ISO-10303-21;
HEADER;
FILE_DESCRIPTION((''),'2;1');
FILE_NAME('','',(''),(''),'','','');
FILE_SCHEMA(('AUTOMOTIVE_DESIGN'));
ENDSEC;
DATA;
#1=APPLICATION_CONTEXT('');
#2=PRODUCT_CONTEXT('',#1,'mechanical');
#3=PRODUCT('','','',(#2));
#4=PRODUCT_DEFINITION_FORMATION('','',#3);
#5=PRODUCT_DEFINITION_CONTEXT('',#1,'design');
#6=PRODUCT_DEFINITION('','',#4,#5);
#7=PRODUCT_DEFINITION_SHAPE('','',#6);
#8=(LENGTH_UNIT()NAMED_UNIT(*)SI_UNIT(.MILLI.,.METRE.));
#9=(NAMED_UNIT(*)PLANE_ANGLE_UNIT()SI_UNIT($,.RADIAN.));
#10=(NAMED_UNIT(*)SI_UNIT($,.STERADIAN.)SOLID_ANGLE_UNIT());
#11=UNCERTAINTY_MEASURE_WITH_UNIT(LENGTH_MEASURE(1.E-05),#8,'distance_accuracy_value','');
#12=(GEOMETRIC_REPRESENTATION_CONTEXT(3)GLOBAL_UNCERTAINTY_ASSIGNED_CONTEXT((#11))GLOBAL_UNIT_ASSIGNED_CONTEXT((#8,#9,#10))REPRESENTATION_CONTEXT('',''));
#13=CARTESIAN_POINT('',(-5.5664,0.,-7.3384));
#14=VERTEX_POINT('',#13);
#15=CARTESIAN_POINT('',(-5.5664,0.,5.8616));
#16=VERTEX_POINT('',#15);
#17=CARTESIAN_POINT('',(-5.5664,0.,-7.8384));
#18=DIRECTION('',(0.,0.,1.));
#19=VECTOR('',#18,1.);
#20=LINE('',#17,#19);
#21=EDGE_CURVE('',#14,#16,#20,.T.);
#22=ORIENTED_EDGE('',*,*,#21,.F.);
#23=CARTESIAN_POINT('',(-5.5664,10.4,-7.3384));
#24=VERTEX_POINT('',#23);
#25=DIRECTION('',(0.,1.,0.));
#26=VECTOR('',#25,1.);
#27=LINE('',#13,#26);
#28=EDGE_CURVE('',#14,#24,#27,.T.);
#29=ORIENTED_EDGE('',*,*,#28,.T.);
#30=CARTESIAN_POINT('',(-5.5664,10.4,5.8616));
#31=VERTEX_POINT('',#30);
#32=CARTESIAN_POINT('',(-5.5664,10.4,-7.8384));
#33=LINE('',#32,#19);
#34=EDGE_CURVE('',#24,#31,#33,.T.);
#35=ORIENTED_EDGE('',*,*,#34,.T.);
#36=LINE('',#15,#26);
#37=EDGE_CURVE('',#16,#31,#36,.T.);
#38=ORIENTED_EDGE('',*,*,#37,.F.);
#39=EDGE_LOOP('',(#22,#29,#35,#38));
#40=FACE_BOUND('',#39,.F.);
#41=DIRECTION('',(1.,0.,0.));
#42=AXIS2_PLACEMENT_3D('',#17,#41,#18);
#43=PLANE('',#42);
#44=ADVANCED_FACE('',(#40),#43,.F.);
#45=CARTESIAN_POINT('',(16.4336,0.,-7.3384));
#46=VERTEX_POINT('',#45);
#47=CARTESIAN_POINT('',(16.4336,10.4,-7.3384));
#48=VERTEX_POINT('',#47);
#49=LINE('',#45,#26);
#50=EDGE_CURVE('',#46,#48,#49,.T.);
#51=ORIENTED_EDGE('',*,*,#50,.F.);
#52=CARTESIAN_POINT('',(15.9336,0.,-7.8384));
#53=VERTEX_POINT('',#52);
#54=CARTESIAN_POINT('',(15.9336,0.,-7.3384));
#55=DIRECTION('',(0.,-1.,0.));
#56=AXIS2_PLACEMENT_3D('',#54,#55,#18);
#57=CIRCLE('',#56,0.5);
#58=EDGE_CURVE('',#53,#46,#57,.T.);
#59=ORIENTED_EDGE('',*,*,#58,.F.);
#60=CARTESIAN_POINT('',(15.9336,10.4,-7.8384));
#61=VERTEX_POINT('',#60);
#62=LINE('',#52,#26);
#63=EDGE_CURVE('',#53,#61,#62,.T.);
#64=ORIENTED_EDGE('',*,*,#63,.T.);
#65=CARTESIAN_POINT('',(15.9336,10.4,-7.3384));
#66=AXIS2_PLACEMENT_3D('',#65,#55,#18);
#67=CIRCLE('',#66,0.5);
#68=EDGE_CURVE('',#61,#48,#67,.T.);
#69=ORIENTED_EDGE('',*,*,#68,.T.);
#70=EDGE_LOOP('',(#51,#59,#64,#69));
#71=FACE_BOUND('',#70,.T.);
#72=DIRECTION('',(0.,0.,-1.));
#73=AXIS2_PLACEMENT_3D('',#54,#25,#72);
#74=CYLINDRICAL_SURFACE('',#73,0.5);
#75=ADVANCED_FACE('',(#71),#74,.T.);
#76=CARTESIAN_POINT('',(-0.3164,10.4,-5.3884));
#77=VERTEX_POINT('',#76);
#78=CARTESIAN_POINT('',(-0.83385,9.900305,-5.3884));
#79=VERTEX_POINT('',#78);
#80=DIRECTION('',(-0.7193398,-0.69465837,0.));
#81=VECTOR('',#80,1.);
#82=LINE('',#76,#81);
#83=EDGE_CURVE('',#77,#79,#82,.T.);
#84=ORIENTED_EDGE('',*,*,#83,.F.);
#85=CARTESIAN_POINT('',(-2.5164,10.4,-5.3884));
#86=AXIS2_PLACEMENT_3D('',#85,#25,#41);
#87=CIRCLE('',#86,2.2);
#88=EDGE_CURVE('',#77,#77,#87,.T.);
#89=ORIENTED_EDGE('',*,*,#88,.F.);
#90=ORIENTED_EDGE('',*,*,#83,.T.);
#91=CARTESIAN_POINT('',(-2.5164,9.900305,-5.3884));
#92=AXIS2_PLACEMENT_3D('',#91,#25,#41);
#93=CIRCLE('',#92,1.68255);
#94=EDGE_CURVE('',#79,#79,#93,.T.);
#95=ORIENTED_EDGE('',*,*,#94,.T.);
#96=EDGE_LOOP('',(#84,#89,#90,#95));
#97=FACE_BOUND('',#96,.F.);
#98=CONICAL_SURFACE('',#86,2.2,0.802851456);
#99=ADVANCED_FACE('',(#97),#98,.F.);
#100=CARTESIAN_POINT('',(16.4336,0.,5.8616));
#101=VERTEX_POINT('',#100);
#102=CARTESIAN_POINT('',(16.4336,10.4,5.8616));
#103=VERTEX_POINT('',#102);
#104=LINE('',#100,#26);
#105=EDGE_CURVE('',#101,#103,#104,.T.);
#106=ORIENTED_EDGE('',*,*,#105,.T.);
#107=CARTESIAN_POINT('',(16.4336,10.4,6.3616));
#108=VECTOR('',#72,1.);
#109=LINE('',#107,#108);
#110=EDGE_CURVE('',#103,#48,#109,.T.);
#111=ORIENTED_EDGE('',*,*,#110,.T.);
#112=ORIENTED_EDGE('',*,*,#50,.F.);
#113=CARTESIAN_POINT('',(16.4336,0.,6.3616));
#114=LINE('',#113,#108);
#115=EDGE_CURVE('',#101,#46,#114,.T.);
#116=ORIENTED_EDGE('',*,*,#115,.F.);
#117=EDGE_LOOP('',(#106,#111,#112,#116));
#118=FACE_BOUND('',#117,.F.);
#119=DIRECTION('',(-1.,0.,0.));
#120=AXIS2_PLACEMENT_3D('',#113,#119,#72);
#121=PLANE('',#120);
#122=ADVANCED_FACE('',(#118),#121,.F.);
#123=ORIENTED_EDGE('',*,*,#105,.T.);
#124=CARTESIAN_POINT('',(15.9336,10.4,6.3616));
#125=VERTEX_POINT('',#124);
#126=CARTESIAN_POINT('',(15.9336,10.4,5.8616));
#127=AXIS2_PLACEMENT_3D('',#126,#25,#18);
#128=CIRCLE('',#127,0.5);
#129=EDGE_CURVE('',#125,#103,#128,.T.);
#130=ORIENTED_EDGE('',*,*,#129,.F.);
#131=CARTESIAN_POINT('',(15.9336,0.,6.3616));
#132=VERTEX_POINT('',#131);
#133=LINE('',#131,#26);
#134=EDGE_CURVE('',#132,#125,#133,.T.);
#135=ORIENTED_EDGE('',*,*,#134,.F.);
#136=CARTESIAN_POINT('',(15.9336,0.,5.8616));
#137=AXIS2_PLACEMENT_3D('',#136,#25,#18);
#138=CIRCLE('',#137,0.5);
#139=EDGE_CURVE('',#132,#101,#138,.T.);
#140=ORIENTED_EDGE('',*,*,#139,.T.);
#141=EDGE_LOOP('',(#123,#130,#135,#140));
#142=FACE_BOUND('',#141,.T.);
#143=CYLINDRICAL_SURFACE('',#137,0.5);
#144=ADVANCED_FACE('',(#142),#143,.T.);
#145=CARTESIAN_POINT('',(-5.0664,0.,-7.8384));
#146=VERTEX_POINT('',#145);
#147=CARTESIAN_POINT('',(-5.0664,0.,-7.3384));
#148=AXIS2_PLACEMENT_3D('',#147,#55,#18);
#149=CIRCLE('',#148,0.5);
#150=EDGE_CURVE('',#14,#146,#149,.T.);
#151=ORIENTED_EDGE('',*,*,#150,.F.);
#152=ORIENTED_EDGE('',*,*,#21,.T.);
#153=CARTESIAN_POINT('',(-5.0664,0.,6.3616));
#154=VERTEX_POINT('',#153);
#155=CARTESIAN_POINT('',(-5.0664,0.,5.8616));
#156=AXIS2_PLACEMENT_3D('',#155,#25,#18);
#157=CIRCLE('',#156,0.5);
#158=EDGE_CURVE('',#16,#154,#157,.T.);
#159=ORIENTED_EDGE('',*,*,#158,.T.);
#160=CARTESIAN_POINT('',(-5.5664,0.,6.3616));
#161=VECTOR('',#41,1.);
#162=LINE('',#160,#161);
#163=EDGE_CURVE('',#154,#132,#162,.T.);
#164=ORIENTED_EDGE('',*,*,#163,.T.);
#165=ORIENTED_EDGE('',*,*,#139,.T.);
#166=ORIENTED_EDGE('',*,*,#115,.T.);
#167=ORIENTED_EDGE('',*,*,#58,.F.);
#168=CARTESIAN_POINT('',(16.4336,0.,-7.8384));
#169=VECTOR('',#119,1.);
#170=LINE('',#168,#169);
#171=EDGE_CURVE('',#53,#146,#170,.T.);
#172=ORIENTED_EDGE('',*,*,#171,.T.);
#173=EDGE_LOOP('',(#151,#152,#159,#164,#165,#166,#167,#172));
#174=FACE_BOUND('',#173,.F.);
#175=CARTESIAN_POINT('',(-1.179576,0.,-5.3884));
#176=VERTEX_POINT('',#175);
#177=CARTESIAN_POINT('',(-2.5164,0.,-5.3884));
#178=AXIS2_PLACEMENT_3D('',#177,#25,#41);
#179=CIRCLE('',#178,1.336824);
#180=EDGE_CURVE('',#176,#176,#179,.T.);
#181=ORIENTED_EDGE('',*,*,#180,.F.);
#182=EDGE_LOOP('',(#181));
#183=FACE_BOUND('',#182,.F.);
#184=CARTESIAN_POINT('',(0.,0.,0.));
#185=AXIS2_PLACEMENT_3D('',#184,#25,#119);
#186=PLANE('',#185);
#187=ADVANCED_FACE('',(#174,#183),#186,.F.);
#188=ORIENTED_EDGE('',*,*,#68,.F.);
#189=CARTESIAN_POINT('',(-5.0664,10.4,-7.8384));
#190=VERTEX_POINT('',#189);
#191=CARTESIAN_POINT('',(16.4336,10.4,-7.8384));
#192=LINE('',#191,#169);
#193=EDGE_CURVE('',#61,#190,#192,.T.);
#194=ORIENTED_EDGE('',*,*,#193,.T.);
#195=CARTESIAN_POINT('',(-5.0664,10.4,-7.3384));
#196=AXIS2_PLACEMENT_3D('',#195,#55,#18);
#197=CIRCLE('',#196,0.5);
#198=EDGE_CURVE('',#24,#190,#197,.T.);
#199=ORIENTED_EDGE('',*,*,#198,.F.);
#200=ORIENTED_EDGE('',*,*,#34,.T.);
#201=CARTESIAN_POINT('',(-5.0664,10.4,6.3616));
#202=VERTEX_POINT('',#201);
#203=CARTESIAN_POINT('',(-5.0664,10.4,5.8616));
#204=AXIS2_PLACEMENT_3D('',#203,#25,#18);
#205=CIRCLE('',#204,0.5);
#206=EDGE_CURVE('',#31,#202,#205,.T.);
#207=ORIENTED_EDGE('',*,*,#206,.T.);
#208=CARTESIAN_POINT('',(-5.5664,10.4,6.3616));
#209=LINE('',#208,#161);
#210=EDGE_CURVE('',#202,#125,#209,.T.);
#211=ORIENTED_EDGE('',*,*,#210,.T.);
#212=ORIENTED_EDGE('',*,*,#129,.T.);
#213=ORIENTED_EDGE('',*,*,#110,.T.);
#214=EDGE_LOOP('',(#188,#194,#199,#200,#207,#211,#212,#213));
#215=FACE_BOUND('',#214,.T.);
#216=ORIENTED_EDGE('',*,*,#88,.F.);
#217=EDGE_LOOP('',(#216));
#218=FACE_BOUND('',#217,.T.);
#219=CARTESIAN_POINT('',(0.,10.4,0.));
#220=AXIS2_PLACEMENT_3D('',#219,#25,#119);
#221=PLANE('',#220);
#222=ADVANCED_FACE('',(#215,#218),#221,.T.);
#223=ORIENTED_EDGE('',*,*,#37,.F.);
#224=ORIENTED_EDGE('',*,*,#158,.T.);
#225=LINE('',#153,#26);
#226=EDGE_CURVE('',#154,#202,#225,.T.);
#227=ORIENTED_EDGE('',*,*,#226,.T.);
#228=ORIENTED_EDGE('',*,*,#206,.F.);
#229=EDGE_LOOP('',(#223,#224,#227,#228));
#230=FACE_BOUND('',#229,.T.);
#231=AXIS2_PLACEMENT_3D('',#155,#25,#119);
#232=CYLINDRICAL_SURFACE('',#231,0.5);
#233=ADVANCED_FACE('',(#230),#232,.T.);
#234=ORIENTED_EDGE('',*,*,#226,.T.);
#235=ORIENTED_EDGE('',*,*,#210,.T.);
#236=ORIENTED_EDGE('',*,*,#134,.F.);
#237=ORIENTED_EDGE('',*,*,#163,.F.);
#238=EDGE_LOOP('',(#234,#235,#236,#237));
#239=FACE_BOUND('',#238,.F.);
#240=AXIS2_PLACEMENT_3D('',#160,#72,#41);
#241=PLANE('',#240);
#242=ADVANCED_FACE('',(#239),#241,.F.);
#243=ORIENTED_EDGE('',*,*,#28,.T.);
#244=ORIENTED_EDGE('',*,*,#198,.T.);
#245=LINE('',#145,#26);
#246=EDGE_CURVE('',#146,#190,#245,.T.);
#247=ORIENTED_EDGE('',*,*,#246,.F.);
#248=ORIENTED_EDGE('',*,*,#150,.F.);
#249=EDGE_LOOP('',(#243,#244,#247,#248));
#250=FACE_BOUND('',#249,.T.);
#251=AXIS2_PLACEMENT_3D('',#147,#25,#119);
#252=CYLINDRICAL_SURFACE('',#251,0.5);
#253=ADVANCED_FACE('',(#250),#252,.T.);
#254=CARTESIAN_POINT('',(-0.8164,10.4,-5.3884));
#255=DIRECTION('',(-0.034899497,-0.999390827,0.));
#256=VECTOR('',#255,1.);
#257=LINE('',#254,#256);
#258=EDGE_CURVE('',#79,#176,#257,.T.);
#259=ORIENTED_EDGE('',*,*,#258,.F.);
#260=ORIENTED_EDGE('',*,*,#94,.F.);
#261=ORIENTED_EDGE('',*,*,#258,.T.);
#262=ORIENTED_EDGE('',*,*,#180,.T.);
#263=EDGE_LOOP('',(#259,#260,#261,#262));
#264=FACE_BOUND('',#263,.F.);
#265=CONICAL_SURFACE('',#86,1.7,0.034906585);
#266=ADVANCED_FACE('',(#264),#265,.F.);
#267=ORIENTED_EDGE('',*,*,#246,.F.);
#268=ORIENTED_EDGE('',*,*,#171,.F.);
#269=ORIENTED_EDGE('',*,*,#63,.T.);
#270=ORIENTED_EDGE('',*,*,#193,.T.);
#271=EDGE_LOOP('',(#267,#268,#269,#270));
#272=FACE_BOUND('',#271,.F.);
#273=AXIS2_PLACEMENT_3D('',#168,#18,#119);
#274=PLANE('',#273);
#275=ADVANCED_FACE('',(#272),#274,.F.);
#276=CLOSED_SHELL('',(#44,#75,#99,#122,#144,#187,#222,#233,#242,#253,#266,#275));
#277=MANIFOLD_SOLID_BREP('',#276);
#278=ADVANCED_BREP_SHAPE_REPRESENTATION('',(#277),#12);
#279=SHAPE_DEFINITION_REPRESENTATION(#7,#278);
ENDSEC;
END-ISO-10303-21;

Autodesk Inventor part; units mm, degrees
ref_plane "YZ Plane" through (0, 0, 0) normal (1, 0, 0) x (0, 1, 0)
ref_plane "XZ Plane" through (0, 0, 0) normal (0, 1, 0) x (-1, 0, 0)
ref_plane "XY Plane" through (0, 0, 0) normal (0, 0, 1) x (1, 0, 0)
sketch "Sketch1" plane through (0, 0, 0) normal (0, 1, 0) x (-1, 0, 0)
  line L0 (5.5664, 6.3616) -> (-16.4336, 6.3616)
  line L1 (-16.4336, 6.3616) -> (-16.4336, -7.8384)
  line L2 (-16.4336, -7.8384) -> (5.5664, -7.8384)
  line L3 (5.5664, -7.8384) -> (5.5664, 6.3616)
  point P0 (0, 0)
  dimension "d2" = 14.2
  dimension "d3" = 22
extrude "Extrusion1" add sketch "Sketch1" along normal blind 10.4
sketch "Sketch2" plane through (0, 10.4, 0) normal (0, 1, 0) x (1, 0, 0)
  line L0 (-5.5664, -6.3616) -> (16.4336, -6.3616) projected
  line L1 (16.4336, -6.3616) -> (16.4336, 7.8384) projected
  line L2 (16.4336, 7.8384) -> (-5.5664, 7.8384) projected
  line L3 (-5.5664, 7.8384) -> (-5.5664, -6.3616) projected
  line L4 (-5.5664, -6.3616) -> (16.4336, -6.3616) projected
  line L5 (-4.3664, -6.3616) -> (-4.3664, 7.8384)
  line L6 (-5.5664, 7.8384) -> (-5.5664, -6.3616) projected
  line L7 (-5.5664, 7.2384) -> (16.4336, 7.2384)
  line L8 (16.4336, -6.3616) -> (16.4336, 7.8384) projected
  circle A0 centre (-2.5164, 5.3884) radius 1.85
  circle A1 centre (-2.5164, 5.3884) radius 1.7
  point P0 (0, 0)
  point P1 (5.4336, 7.2384)
  dimension "d4" = 1.2
  dimension "d5" = 0.6
  dimension "d6" = 3.7
  dimension "d8" = 3.4
extrude "Extrusion2" cut sketch "Sketch2" against normal through all draft -2 contours A1
fillet "Fillet1" radius 0.5 4 edges at (16.4336, 5.2, 6.3616) (16.4336, 5.2, -7.8384) (-5.5664, 5.2, -7.8384) (-5.5664, 5.2, 6.3616)
chamfer "Chamfer1" distance 0.5 angle 45 1 edges at (-4.2164, 10.4, -5.3884)
properties part number "podpora_imu"
